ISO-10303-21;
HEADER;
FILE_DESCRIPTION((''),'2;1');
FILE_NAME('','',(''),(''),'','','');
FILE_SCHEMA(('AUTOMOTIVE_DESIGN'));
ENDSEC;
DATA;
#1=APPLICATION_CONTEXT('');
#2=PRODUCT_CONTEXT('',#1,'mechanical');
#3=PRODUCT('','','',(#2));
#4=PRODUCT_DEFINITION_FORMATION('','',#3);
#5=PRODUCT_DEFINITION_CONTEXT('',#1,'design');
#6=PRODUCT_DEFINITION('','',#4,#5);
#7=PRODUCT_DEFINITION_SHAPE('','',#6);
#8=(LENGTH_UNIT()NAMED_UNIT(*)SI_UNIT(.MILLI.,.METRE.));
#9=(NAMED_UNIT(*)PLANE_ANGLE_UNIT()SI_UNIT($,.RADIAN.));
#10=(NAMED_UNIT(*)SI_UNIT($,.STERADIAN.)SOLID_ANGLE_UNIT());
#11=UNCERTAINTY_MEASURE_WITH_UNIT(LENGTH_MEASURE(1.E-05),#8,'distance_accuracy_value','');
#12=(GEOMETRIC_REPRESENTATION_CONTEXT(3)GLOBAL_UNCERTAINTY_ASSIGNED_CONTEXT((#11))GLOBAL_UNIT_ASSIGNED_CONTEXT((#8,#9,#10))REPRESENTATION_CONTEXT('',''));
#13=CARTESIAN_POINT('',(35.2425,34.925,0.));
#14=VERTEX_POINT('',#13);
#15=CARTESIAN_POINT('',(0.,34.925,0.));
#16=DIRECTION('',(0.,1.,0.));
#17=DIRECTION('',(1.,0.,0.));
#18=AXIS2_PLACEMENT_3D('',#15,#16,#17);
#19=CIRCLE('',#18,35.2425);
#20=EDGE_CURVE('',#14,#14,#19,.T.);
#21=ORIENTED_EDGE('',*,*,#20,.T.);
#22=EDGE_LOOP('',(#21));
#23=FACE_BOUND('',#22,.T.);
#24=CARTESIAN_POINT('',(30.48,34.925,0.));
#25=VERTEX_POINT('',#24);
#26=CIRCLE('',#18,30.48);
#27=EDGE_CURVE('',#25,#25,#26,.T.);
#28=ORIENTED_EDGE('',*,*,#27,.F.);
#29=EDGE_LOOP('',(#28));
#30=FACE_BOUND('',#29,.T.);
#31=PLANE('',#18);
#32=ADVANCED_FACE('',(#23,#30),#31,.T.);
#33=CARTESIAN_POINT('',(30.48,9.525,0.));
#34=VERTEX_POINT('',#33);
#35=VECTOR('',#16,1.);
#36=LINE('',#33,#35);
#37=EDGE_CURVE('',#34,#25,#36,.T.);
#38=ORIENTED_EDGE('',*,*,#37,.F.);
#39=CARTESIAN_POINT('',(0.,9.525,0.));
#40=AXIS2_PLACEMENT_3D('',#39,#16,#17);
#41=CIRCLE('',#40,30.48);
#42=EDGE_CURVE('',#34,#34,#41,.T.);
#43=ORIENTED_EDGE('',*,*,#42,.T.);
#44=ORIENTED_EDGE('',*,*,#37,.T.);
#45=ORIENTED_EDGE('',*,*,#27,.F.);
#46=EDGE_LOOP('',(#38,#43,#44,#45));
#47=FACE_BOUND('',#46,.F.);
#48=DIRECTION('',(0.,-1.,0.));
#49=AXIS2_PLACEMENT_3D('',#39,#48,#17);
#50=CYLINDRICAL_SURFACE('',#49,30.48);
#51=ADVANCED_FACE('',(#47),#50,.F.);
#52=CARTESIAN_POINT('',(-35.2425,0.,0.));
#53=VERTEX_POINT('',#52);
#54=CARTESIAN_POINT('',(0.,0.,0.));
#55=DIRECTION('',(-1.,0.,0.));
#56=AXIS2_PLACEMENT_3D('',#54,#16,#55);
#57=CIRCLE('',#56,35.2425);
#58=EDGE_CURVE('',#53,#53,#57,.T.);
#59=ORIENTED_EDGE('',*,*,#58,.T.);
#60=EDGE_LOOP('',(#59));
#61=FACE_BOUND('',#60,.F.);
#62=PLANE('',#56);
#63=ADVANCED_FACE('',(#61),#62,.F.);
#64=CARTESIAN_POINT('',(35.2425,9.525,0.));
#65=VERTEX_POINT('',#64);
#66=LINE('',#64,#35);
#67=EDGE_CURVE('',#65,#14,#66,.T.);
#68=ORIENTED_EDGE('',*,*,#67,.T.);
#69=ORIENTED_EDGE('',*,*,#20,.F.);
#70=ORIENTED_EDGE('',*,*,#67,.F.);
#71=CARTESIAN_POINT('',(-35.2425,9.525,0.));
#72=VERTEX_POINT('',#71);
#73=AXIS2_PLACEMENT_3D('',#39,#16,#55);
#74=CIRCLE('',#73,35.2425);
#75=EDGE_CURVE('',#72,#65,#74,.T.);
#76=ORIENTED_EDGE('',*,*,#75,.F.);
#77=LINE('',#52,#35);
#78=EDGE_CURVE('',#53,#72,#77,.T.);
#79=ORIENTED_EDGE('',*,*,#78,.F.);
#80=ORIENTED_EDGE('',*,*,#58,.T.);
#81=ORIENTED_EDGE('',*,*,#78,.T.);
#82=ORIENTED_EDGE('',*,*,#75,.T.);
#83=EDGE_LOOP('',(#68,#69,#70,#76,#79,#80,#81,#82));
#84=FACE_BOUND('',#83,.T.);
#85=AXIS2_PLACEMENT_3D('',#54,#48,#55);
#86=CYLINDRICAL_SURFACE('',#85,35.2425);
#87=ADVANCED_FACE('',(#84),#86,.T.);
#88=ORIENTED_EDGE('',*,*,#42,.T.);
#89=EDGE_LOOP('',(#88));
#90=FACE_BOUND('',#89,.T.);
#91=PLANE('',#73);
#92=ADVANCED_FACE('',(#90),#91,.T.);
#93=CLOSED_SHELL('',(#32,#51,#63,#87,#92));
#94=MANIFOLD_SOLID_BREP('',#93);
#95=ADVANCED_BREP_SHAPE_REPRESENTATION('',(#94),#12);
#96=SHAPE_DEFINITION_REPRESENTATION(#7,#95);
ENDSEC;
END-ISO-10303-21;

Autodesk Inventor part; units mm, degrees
ref_plane "YZ Plane" through (0, 0, 0) normal (1, 0, 0) x (0, 1, 0)
ref_plane "XZ Plane" through (0, 0, 0) normal (0, 1, 0) x (-1, 0, 0)
ref_plane "XY Plane" through (0, 0, 0) normal (0, 0, 1) x (1, 0, 0)
sketch "Sketch1" plane through (0, 0, 0) normal (0, 1, 0) x (-1, 0, 0)
  circle A0 centre (0, 0) radius 35.2425
  dimension "d0" = 70.485
extrude "Extrusion1" add sketch "Sketch1" along normal blind 9.525
sketch "Sketch2" plane through (0, 9.525, 0) normal (0, 1, 0) x (1, 0, 0)
  circle A0 centre (0, 0) radius 35.2425
  circle A1 centre (0, 0) radius 30.48
  dimension "d4" = 60.96
  dimension "d5" = 70.485
extrude "Extrusion3" add sketch "Sketch2" along normal blind 25.4
equation "\"d0\" = lensCoverOD"
equation "\"d2\" = wallThickness"
equation "\"d4\" = lensCoverID"
equation "\"d5\" = lensCoverOD"
equation "\"d9\" = lensCoverLength"
equation "\"objectiveOD\" = 60.325"
equation "\"lensCoverLength\" = 25.4"
equation "\"wallThickness\" = 9.525"
equation "\"lensCoverOD\" = lensCoverID + wallThickness"
equation "\"clearance\" = 0.635"
equation "\"lensCoverID\" = objectiveOD + clearance"
properties part number "LargeFinderObjectiveCover"
